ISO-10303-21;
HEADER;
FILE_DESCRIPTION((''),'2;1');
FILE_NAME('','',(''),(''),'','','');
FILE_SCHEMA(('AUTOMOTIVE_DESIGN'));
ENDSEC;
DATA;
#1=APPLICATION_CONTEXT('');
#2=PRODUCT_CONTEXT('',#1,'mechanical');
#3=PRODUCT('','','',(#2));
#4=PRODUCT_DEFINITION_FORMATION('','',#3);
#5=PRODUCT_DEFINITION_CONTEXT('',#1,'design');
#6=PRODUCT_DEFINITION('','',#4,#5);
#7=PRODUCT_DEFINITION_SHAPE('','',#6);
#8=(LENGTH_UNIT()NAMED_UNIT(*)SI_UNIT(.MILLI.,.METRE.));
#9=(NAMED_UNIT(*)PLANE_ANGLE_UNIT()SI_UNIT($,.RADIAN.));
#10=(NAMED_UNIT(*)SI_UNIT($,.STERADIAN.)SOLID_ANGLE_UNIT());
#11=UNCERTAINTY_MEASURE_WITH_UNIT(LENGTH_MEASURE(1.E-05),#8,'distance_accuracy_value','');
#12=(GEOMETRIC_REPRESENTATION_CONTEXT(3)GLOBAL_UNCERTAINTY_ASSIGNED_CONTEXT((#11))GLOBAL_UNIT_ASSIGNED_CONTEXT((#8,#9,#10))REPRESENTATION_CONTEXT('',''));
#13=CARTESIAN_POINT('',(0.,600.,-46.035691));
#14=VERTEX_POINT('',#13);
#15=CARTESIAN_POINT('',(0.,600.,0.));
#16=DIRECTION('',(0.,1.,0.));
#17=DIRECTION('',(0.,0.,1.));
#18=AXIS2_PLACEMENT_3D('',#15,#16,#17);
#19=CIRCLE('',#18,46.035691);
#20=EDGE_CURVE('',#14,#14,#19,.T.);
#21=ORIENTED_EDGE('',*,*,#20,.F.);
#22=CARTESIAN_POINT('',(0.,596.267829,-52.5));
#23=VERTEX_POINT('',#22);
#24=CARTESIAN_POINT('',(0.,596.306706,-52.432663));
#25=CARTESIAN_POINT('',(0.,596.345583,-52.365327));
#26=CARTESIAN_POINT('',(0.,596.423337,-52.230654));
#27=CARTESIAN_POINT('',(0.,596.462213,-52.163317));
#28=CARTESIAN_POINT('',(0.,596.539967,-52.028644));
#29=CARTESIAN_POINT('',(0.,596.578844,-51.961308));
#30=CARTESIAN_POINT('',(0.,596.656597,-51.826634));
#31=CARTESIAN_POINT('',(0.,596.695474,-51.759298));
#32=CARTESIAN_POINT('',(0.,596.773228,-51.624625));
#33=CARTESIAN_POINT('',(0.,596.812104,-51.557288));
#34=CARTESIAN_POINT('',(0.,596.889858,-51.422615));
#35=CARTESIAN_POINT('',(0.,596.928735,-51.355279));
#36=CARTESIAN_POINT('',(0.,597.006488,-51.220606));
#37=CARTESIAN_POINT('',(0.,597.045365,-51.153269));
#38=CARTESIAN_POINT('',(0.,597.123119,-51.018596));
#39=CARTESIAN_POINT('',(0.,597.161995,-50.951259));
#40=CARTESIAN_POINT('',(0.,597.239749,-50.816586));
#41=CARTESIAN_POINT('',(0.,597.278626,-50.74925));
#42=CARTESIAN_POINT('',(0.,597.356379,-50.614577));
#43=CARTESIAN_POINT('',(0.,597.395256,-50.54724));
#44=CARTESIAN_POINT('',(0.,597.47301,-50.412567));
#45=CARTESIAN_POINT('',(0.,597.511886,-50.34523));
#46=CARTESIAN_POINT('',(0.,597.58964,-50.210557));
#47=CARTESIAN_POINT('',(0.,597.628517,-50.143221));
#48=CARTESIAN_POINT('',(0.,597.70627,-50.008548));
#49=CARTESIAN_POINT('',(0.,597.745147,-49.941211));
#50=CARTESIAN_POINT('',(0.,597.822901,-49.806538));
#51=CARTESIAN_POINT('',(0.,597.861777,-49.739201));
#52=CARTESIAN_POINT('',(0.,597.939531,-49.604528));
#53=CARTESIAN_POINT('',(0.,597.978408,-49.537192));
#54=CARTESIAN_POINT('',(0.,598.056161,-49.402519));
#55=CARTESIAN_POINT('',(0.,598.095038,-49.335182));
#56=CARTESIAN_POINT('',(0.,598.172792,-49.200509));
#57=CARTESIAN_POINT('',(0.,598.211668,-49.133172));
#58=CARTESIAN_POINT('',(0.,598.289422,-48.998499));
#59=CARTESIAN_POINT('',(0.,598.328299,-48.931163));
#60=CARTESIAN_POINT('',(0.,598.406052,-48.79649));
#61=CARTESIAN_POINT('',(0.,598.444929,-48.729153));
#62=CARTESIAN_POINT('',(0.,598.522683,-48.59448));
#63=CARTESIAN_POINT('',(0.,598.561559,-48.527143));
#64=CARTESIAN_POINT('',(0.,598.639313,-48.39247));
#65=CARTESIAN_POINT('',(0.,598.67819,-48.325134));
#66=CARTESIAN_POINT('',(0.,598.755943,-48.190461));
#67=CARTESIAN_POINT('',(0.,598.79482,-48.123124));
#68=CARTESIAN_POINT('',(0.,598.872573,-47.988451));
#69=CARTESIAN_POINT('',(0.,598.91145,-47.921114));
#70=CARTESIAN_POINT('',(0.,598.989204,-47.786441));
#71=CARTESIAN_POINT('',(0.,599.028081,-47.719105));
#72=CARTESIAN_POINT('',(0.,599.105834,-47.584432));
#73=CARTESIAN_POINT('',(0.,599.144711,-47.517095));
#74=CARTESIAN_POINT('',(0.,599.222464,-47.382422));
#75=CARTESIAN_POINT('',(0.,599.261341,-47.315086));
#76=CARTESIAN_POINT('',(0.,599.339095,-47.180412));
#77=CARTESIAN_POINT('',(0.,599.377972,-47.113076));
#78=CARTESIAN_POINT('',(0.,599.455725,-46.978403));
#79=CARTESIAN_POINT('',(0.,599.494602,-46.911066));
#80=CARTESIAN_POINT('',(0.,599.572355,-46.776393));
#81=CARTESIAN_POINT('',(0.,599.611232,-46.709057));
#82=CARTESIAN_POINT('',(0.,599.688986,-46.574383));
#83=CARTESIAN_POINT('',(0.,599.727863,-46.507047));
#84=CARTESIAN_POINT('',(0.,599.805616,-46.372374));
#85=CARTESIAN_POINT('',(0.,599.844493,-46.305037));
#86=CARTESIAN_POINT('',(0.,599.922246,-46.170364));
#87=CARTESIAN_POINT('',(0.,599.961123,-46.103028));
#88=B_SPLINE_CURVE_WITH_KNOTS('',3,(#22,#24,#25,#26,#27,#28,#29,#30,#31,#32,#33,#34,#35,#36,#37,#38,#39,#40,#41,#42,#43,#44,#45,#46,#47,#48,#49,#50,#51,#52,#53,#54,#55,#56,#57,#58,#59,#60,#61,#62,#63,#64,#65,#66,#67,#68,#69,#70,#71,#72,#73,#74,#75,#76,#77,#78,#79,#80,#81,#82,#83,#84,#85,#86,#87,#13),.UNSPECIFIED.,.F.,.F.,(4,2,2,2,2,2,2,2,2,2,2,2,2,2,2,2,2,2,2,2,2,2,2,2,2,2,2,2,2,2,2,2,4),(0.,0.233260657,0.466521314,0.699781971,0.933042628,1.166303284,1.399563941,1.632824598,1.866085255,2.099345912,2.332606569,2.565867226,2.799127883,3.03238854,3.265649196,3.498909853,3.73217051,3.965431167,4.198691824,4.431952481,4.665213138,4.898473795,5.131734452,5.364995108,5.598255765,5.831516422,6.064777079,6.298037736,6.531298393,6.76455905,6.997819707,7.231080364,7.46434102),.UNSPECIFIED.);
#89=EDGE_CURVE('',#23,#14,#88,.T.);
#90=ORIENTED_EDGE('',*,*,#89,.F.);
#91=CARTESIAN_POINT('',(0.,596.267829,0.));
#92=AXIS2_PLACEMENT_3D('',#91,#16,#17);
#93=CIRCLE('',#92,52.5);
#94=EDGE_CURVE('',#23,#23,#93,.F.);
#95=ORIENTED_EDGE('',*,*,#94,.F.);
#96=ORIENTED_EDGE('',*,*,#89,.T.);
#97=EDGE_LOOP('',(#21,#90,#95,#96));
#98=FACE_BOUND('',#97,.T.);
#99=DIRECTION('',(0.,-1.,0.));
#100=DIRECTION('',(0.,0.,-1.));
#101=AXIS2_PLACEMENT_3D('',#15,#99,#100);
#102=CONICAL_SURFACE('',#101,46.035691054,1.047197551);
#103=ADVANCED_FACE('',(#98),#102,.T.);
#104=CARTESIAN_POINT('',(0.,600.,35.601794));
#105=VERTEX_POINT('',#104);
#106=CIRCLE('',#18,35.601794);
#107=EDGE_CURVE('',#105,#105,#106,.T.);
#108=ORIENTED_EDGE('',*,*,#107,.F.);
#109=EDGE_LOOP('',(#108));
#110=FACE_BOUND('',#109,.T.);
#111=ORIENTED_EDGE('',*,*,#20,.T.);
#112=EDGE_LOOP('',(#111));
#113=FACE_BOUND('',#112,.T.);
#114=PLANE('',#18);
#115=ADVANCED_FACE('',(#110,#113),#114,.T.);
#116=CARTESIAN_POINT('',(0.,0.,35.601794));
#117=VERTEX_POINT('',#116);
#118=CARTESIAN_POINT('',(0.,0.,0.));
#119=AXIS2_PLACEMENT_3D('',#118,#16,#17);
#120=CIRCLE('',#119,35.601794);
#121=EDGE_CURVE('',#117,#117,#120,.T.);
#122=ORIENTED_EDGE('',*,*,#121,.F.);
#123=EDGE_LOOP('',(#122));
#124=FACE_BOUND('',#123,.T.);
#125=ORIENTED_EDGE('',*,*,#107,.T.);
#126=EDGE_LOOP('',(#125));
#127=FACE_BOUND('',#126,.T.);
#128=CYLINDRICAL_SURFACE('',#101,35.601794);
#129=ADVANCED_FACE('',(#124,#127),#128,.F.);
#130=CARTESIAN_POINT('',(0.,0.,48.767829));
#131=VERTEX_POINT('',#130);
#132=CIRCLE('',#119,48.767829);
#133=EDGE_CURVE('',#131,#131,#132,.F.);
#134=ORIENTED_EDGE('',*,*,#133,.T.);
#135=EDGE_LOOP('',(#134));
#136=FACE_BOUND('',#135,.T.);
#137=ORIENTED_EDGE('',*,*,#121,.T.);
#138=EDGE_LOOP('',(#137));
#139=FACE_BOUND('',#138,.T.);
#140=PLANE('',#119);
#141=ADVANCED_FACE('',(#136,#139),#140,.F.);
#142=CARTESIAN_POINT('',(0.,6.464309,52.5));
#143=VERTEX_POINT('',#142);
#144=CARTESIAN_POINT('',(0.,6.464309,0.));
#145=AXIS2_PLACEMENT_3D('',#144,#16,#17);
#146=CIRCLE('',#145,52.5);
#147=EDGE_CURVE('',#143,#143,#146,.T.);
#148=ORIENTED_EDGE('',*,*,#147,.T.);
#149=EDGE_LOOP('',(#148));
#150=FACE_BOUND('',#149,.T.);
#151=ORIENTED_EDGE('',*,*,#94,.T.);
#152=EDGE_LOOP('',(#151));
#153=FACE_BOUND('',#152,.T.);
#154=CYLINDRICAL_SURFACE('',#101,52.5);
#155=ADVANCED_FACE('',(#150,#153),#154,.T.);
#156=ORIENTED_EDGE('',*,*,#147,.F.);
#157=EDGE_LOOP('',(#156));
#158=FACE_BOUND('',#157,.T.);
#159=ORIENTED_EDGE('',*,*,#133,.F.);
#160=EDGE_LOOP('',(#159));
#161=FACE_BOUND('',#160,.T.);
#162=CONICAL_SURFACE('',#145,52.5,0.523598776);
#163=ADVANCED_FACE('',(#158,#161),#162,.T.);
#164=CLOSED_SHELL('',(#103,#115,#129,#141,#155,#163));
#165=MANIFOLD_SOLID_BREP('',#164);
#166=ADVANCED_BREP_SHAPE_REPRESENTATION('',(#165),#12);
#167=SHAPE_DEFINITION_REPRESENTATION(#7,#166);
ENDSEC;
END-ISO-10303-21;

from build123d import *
from OCP.BRepFilletAPI import BRepFilletAPI_MakeChamfer

# Parameters (mm, degrees)
SKETCH1_R           = 52.5
BOSS_EXTRUDE1_DEPTH = 600
SKETCH2_R           = 35.601794352
CUT_EXTRUDE1_DEPTH  = 605.576297914
CHAMFER1_SIZE       = 3.73217051
CHAMFER1_SIZE2      = 6.464308946


with BuildPart() as part:
    # Sketch1 → Boss-Extrude1 (new body)
    with BuildSketch(Plane(origin=(0, 0, 0), x_dir=(1, 0, 0), z_dir=(0, 1, 0))):
        Circle(SKETCH1_R)
    extrude(amount=BOSS_EXTRUDE1_DEPTH)

    # Sketch2 → Cut-Extrude1 (cut, through all)
    with BuildSketch(Plane(origin=(0, 0, 0), x_dir=(1, 0, 0), z_dir=(0, 1, 0))):
        Circle(SKETCH2_R)
    extrude(amount=CUT_EXTRUDE1_DEPTH, mode=Mode.SUBTRACT)

    # Chamfer1: one chamfer whose edges measure the first distance from different faces: ONE call of the kernel's chamfer builder (chamfer() names one face for all edges)
    chamfer1_edges_1 = [part.edges().sort_by_distance(p)[0] for p in [
        (-52.5, 600, 0),
    ]]
    chamfer1_side_1 = [part.faces().sort_by_distance(p)[0] for p in [
        (-52.5, 300, 0),
    ]]
    chamfer1_edges_2 = [part.edges().sort_by_distance(p)[0] for p in [
        (-52.5, 0, 0),
    ]]
    chamfer1_side_2 = [part.faces().sort_by_distance(p)[0] for p in [
        (-51.01507576, 0, 0),
    ]]
    chamfer1 = BRepFilletAPI_MakeChamfer(part.part.solid().wrapped)
    for e in chamfer1_edges_1:
        chamfer1.Add(CHAMFER1_SIZE, CHAMFER1_SIZE2, e.wrapped, chamfer1_side_1[0].wrapped)  # the first distance lies on this face
    for e in chamfer1_edges_2:
        chamfer1.Add(CHAMFER1_SIZE, CHAMFER1_SIZE2, e.wrapped, chamfer1_side_2[0].wrapped)  # the first distance lies on this face
    add(Compound.cast(chamfer1.Shape()), mode=Mode.REPLACE)


solid = part.part
